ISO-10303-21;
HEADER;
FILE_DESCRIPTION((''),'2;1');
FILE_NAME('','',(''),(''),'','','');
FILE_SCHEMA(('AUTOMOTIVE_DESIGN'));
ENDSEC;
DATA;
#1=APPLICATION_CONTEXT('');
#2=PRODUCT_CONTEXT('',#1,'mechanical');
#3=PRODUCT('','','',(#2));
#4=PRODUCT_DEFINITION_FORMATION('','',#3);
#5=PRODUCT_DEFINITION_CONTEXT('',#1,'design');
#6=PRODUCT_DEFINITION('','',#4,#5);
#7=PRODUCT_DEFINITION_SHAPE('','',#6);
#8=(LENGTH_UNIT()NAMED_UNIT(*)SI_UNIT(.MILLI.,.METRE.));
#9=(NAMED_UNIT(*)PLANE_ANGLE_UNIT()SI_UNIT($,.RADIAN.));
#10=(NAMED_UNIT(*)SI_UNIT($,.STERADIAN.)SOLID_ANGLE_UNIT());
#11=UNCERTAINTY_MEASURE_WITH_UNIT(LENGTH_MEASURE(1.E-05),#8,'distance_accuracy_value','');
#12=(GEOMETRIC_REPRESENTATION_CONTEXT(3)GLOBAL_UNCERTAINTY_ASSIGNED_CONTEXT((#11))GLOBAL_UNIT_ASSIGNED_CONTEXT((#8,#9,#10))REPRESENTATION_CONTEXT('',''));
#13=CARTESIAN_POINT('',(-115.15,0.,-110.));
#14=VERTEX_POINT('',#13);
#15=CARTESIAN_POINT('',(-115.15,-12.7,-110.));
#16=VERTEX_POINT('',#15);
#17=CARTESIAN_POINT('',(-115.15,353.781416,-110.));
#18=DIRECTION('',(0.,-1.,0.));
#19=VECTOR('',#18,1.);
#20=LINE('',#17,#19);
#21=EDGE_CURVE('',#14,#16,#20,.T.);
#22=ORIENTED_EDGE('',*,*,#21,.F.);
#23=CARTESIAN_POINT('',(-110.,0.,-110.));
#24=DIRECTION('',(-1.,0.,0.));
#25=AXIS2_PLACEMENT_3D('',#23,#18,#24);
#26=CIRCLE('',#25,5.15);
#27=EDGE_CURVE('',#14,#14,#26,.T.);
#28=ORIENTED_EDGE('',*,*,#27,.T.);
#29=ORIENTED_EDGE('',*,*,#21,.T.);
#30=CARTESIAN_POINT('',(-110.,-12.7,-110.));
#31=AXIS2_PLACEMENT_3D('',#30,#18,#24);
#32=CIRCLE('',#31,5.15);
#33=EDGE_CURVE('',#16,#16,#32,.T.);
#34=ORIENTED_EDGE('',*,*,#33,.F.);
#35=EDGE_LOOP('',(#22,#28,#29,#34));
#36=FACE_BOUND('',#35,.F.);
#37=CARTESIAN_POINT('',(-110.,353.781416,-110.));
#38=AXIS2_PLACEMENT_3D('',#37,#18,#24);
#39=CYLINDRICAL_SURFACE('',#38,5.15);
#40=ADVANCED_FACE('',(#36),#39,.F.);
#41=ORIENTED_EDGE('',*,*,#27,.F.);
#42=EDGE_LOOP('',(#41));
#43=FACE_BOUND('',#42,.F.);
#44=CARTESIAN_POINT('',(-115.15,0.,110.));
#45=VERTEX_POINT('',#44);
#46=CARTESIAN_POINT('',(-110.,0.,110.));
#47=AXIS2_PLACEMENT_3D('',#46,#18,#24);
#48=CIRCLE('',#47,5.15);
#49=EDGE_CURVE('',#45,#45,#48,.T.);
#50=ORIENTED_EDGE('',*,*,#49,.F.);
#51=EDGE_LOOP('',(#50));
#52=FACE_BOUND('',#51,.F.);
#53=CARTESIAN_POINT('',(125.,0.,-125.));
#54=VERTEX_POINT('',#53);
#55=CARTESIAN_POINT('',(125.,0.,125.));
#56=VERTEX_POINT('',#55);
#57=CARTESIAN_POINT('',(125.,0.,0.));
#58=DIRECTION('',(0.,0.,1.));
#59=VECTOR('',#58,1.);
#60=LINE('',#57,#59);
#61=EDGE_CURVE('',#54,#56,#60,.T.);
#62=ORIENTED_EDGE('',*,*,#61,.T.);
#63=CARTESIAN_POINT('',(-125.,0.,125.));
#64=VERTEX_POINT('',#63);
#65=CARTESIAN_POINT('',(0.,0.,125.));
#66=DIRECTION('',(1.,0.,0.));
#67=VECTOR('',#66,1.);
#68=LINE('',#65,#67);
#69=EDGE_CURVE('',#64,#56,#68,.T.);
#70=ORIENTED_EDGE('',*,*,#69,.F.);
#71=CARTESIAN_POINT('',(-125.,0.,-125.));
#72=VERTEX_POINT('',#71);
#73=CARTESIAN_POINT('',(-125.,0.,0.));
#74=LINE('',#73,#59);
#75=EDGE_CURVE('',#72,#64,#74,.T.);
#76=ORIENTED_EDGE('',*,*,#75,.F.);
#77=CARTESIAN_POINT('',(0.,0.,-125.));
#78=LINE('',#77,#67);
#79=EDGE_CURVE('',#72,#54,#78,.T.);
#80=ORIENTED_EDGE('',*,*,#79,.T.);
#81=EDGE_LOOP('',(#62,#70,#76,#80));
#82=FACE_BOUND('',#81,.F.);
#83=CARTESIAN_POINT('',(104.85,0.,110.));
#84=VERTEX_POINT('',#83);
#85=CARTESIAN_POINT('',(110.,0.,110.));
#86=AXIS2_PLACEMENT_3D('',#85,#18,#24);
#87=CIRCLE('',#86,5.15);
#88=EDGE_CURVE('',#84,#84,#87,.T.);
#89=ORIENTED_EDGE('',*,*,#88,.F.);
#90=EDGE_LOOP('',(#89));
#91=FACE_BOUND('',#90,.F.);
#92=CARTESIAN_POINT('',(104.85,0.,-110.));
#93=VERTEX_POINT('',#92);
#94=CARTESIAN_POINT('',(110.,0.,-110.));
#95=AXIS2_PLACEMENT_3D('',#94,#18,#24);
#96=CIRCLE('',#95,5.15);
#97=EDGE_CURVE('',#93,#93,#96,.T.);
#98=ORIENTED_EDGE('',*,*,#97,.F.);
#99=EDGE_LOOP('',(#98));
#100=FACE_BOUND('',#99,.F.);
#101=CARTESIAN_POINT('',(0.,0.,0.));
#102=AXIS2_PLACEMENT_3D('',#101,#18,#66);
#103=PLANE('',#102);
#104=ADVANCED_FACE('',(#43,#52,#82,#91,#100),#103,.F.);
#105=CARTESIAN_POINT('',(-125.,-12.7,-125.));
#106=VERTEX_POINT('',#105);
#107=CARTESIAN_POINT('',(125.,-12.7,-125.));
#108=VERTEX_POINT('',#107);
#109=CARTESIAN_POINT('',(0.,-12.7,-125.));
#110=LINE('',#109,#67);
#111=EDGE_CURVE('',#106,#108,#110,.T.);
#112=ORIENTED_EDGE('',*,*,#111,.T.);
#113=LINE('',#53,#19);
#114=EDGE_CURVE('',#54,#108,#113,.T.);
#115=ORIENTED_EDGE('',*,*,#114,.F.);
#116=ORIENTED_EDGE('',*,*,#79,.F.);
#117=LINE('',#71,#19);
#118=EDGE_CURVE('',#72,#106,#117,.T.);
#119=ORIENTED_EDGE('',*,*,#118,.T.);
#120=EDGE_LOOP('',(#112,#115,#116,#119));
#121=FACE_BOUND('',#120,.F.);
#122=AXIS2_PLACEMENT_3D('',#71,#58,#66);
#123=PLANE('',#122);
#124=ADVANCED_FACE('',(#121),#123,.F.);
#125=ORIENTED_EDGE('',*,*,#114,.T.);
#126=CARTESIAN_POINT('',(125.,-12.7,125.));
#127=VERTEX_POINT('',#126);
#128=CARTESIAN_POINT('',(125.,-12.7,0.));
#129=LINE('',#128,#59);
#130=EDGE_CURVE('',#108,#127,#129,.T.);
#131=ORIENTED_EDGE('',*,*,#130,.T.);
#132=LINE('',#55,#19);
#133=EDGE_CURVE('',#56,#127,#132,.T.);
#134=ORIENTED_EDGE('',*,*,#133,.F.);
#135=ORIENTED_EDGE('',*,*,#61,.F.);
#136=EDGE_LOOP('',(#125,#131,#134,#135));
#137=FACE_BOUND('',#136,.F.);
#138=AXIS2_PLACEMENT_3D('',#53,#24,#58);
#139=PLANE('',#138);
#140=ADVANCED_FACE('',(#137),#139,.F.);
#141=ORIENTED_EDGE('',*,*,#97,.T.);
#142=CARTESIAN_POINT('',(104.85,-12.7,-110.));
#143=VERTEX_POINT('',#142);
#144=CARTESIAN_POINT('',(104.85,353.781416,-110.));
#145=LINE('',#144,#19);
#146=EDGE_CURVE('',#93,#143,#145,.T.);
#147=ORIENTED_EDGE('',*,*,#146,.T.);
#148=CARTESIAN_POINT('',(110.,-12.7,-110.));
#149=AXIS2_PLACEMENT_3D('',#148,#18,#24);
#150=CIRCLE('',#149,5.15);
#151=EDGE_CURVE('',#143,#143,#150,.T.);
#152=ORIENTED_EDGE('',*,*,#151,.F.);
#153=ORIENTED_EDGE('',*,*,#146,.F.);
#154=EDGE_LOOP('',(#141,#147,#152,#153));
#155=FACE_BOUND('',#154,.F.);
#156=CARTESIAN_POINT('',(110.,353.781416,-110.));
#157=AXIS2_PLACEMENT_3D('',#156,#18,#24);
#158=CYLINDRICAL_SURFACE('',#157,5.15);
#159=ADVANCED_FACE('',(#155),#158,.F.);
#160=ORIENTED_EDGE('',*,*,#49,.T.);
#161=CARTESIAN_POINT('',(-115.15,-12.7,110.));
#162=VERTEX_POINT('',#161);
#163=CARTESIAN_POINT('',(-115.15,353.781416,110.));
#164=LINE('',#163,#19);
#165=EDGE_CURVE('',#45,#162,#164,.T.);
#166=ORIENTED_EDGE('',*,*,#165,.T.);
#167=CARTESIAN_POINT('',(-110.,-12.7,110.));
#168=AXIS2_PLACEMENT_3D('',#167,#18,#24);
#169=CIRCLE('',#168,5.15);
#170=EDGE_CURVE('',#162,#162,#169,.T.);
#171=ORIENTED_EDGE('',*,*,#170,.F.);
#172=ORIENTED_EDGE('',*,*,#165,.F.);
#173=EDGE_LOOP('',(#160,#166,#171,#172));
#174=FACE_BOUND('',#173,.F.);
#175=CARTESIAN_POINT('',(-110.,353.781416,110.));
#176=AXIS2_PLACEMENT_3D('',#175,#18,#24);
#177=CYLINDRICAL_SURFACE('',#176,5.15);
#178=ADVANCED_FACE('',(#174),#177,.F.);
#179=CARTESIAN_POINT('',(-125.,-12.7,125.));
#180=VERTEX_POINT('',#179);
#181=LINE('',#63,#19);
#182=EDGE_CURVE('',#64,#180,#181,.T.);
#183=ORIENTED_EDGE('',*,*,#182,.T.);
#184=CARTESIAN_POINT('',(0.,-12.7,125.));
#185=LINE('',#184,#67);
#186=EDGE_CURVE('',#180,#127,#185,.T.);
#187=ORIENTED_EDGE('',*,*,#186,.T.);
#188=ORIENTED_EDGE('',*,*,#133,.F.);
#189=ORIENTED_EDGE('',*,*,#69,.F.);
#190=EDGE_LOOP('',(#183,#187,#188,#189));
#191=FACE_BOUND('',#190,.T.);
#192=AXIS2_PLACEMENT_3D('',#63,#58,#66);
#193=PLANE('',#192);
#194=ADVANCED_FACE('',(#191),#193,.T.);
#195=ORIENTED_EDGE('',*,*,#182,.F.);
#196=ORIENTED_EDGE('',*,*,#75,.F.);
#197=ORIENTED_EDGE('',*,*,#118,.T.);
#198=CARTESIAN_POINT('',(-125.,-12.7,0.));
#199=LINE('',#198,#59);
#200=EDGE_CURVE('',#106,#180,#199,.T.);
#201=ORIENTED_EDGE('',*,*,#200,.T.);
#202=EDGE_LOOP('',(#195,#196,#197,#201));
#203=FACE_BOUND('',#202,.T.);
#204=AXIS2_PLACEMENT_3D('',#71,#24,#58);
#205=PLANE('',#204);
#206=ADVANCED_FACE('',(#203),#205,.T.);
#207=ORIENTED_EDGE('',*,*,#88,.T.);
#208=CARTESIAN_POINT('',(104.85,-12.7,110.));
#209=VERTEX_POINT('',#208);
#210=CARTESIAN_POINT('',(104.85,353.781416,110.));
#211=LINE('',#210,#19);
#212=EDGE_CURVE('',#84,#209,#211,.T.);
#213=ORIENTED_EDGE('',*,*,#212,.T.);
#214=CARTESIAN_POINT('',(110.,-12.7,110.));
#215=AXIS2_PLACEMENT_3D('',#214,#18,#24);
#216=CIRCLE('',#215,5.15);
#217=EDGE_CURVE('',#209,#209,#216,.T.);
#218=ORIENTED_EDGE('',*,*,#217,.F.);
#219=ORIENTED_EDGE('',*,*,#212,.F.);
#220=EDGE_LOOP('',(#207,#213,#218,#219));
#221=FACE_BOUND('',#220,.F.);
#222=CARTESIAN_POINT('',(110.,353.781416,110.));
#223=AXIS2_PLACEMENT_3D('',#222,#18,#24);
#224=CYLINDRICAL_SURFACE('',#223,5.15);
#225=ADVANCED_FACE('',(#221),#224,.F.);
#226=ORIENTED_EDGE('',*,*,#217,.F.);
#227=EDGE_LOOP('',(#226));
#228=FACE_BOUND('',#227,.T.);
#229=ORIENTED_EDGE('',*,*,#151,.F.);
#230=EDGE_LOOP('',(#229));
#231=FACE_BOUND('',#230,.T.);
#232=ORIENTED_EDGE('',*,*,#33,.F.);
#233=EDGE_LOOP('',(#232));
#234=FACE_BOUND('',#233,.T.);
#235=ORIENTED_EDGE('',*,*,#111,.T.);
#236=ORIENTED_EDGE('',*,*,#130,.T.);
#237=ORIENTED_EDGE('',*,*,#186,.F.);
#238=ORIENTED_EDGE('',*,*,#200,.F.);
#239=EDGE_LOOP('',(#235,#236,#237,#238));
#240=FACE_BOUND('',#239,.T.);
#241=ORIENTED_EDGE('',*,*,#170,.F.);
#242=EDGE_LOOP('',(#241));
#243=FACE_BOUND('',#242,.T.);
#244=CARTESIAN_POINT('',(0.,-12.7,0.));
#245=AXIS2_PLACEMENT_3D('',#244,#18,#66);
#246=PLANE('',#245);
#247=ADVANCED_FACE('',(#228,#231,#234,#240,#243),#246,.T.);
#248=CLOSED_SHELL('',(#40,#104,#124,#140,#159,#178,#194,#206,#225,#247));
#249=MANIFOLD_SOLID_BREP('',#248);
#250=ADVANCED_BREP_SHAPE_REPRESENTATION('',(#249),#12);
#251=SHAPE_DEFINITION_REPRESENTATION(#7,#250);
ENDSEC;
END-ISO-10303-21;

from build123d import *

# Parameters (mm, degrees)
F0_W     = 250
F0_H     = 250
F1_DEPTH = 12.7
F2_D     = 10.3


# Not quite as in the source:
# - a length typed as a fraction of an inch, garbled in the dataset ("3 / 203.2 mm" for 3/8 in), is restored


with BuildPart() as f1:
    # F0 (on Front) → F1 (new body)
    with BuildSketch(Plane.XZ):
        Rectangle(F0_W, F0_H)
    extrude(amount=F1_DEPTH)

    # F2 (through all)
    with Locations(Plane(origin=(0, 0, 0), x_dir=(1, 0, 0), z_dir=(0, 1, 0))):
        with Locations((-110, -110), (-110, 110), (110, 110), (110, -110)):
            Hole(F2_D / 2)


solid = f1.part
